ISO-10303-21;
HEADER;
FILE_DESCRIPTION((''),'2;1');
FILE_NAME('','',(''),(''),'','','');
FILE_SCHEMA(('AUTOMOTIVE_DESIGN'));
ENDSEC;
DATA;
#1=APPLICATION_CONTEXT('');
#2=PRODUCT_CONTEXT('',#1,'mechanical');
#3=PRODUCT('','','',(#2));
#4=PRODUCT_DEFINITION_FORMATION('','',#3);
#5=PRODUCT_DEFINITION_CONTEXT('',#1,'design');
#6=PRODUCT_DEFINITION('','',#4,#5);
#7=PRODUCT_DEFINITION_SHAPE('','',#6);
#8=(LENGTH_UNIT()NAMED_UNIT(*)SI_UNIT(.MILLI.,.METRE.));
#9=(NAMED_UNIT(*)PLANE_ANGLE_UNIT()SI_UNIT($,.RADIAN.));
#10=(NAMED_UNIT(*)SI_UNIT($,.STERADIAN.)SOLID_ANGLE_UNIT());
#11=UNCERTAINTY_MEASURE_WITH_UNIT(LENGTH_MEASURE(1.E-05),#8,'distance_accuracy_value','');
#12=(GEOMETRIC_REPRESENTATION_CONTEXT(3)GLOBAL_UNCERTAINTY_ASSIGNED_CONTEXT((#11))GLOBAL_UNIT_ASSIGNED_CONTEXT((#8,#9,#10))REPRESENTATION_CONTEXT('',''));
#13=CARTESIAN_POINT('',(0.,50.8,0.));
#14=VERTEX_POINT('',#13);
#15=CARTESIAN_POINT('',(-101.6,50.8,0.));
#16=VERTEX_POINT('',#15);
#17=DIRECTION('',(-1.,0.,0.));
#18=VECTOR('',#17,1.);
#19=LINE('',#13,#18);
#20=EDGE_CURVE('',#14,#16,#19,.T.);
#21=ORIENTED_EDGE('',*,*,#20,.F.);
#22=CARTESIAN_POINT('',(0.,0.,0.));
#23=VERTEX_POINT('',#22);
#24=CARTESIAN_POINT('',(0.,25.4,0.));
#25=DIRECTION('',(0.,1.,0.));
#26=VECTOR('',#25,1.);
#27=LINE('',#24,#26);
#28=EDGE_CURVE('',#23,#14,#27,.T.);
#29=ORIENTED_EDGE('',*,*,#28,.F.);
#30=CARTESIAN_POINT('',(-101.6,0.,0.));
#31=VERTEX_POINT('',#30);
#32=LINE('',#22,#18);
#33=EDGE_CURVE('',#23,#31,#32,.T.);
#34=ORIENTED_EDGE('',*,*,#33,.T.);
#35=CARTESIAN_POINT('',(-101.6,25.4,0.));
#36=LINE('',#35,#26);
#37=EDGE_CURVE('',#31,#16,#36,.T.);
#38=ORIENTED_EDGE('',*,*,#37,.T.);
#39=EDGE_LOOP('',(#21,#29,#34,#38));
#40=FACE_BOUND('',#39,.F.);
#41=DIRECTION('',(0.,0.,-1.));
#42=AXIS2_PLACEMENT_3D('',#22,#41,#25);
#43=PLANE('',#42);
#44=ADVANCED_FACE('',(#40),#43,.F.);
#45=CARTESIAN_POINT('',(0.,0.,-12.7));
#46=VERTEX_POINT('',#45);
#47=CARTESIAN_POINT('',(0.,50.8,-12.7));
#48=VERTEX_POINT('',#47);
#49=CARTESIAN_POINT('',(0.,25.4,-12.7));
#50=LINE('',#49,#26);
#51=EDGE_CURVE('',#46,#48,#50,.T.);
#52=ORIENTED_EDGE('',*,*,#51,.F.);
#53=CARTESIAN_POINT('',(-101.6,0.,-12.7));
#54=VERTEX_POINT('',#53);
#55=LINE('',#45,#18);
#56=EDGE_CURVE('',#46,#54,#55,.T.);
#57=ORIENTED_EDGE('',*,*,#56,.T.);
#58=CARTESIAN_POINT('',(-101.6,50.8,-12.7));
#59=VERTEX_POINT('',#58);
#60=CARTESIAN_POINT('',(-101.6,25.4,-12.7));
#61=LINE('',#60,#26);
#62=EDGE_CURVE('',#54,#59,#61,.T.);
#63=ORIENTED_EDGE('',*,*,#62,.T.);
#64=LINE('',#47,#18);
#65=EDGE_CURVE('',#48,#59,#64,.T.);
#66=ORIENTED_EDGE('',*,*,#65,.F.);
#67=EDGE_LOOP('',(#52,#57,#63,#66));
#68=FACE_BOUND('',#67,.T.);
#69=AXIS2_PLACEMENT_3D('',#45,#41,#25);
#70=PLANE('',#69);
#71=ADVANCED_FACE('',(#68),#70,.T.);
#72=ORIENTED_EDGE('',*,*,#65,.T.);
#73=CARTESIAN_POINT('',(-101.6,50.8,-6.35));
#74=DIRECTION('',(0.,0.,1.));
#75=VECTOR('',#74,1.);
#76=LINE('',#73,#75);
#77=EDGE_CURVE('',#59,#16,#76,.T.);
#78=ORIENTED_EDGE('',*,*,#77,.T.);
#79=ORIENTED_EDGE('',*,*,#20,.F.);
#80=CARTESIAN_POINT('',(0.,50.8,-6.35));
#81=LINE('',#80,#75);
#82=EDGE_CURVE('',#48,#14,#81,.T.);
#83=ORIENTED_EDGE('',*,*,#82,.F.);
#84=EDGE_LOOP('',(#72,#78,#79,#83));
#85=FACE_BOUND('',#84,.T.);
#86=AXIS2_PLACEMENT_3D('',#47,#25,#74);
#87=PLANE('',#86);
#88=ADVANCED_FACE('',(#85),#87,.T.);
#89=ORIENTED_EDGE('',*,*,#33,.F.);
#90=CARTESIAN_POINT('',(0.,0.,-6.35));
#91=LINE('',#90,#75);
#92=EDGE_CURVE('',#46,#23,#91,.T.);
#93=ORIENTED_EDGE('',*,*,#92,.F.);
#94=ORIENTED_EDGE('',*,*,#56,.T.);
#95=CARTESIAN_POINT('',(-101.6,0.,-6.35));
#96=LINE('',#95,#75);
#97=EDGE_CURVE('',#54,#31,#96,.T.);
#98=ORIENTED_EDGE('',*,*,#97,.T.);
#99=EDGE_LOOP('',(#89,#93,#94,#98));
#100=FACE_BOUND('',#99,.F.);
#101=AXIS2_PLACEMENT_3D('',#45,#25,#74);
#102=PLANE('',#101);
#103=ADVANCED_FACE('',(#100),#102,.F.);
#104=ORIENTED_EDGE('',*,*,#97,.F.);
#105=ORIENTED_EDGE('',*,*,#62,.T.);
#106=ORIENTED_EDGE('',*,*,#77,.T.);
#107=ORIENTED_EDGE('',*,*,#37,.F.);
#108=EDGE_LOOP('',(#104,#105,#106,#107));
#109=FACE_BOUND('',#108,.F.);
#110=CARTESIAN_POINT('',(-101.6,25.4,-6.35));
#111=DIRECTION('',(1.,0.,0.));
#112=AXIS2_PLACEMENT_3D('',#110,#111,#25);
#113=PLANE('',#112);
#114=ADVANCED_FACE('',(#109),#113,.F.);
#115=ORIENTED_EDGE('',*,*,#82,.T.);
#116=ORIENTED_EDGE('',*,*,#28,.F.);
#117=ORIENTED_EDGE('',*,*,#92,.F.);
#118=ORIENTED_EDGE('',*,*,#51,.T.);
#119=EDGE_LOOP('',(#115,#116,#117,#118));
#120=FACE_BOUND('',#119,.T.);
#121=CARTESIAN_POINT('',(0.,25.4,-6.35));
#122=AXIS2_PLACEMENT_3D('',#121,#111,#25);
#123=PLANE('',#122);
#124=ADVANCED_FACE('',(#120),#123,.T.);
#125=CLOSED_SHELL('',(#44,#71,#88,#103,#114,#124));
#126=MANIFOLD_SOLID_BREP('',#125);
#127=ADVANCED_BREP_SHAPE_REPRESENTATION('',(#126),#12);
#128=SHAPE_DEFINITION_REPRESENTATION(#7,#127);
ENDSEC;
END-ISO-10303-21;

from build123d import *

# Parameters (mm, degrees)
F1_W     = 50.8
F1_H     = 12.7
F2_DEPTH = 101.6


# Not quite as in the source:
# - a variable given as a bare number and used for a length is read in inches; the dataset says mm whatever the document's units were


with BuildPart() as f2:
    # F1 (on Right) → F2 (new body)
    with BuildSketch(Plane.YZ):
        with Locations((25.4, -6.35)):
            Rectangle(F1_W, F1_H)
    extrude(amount=-F2_DEPTH)


solid = f2.part
